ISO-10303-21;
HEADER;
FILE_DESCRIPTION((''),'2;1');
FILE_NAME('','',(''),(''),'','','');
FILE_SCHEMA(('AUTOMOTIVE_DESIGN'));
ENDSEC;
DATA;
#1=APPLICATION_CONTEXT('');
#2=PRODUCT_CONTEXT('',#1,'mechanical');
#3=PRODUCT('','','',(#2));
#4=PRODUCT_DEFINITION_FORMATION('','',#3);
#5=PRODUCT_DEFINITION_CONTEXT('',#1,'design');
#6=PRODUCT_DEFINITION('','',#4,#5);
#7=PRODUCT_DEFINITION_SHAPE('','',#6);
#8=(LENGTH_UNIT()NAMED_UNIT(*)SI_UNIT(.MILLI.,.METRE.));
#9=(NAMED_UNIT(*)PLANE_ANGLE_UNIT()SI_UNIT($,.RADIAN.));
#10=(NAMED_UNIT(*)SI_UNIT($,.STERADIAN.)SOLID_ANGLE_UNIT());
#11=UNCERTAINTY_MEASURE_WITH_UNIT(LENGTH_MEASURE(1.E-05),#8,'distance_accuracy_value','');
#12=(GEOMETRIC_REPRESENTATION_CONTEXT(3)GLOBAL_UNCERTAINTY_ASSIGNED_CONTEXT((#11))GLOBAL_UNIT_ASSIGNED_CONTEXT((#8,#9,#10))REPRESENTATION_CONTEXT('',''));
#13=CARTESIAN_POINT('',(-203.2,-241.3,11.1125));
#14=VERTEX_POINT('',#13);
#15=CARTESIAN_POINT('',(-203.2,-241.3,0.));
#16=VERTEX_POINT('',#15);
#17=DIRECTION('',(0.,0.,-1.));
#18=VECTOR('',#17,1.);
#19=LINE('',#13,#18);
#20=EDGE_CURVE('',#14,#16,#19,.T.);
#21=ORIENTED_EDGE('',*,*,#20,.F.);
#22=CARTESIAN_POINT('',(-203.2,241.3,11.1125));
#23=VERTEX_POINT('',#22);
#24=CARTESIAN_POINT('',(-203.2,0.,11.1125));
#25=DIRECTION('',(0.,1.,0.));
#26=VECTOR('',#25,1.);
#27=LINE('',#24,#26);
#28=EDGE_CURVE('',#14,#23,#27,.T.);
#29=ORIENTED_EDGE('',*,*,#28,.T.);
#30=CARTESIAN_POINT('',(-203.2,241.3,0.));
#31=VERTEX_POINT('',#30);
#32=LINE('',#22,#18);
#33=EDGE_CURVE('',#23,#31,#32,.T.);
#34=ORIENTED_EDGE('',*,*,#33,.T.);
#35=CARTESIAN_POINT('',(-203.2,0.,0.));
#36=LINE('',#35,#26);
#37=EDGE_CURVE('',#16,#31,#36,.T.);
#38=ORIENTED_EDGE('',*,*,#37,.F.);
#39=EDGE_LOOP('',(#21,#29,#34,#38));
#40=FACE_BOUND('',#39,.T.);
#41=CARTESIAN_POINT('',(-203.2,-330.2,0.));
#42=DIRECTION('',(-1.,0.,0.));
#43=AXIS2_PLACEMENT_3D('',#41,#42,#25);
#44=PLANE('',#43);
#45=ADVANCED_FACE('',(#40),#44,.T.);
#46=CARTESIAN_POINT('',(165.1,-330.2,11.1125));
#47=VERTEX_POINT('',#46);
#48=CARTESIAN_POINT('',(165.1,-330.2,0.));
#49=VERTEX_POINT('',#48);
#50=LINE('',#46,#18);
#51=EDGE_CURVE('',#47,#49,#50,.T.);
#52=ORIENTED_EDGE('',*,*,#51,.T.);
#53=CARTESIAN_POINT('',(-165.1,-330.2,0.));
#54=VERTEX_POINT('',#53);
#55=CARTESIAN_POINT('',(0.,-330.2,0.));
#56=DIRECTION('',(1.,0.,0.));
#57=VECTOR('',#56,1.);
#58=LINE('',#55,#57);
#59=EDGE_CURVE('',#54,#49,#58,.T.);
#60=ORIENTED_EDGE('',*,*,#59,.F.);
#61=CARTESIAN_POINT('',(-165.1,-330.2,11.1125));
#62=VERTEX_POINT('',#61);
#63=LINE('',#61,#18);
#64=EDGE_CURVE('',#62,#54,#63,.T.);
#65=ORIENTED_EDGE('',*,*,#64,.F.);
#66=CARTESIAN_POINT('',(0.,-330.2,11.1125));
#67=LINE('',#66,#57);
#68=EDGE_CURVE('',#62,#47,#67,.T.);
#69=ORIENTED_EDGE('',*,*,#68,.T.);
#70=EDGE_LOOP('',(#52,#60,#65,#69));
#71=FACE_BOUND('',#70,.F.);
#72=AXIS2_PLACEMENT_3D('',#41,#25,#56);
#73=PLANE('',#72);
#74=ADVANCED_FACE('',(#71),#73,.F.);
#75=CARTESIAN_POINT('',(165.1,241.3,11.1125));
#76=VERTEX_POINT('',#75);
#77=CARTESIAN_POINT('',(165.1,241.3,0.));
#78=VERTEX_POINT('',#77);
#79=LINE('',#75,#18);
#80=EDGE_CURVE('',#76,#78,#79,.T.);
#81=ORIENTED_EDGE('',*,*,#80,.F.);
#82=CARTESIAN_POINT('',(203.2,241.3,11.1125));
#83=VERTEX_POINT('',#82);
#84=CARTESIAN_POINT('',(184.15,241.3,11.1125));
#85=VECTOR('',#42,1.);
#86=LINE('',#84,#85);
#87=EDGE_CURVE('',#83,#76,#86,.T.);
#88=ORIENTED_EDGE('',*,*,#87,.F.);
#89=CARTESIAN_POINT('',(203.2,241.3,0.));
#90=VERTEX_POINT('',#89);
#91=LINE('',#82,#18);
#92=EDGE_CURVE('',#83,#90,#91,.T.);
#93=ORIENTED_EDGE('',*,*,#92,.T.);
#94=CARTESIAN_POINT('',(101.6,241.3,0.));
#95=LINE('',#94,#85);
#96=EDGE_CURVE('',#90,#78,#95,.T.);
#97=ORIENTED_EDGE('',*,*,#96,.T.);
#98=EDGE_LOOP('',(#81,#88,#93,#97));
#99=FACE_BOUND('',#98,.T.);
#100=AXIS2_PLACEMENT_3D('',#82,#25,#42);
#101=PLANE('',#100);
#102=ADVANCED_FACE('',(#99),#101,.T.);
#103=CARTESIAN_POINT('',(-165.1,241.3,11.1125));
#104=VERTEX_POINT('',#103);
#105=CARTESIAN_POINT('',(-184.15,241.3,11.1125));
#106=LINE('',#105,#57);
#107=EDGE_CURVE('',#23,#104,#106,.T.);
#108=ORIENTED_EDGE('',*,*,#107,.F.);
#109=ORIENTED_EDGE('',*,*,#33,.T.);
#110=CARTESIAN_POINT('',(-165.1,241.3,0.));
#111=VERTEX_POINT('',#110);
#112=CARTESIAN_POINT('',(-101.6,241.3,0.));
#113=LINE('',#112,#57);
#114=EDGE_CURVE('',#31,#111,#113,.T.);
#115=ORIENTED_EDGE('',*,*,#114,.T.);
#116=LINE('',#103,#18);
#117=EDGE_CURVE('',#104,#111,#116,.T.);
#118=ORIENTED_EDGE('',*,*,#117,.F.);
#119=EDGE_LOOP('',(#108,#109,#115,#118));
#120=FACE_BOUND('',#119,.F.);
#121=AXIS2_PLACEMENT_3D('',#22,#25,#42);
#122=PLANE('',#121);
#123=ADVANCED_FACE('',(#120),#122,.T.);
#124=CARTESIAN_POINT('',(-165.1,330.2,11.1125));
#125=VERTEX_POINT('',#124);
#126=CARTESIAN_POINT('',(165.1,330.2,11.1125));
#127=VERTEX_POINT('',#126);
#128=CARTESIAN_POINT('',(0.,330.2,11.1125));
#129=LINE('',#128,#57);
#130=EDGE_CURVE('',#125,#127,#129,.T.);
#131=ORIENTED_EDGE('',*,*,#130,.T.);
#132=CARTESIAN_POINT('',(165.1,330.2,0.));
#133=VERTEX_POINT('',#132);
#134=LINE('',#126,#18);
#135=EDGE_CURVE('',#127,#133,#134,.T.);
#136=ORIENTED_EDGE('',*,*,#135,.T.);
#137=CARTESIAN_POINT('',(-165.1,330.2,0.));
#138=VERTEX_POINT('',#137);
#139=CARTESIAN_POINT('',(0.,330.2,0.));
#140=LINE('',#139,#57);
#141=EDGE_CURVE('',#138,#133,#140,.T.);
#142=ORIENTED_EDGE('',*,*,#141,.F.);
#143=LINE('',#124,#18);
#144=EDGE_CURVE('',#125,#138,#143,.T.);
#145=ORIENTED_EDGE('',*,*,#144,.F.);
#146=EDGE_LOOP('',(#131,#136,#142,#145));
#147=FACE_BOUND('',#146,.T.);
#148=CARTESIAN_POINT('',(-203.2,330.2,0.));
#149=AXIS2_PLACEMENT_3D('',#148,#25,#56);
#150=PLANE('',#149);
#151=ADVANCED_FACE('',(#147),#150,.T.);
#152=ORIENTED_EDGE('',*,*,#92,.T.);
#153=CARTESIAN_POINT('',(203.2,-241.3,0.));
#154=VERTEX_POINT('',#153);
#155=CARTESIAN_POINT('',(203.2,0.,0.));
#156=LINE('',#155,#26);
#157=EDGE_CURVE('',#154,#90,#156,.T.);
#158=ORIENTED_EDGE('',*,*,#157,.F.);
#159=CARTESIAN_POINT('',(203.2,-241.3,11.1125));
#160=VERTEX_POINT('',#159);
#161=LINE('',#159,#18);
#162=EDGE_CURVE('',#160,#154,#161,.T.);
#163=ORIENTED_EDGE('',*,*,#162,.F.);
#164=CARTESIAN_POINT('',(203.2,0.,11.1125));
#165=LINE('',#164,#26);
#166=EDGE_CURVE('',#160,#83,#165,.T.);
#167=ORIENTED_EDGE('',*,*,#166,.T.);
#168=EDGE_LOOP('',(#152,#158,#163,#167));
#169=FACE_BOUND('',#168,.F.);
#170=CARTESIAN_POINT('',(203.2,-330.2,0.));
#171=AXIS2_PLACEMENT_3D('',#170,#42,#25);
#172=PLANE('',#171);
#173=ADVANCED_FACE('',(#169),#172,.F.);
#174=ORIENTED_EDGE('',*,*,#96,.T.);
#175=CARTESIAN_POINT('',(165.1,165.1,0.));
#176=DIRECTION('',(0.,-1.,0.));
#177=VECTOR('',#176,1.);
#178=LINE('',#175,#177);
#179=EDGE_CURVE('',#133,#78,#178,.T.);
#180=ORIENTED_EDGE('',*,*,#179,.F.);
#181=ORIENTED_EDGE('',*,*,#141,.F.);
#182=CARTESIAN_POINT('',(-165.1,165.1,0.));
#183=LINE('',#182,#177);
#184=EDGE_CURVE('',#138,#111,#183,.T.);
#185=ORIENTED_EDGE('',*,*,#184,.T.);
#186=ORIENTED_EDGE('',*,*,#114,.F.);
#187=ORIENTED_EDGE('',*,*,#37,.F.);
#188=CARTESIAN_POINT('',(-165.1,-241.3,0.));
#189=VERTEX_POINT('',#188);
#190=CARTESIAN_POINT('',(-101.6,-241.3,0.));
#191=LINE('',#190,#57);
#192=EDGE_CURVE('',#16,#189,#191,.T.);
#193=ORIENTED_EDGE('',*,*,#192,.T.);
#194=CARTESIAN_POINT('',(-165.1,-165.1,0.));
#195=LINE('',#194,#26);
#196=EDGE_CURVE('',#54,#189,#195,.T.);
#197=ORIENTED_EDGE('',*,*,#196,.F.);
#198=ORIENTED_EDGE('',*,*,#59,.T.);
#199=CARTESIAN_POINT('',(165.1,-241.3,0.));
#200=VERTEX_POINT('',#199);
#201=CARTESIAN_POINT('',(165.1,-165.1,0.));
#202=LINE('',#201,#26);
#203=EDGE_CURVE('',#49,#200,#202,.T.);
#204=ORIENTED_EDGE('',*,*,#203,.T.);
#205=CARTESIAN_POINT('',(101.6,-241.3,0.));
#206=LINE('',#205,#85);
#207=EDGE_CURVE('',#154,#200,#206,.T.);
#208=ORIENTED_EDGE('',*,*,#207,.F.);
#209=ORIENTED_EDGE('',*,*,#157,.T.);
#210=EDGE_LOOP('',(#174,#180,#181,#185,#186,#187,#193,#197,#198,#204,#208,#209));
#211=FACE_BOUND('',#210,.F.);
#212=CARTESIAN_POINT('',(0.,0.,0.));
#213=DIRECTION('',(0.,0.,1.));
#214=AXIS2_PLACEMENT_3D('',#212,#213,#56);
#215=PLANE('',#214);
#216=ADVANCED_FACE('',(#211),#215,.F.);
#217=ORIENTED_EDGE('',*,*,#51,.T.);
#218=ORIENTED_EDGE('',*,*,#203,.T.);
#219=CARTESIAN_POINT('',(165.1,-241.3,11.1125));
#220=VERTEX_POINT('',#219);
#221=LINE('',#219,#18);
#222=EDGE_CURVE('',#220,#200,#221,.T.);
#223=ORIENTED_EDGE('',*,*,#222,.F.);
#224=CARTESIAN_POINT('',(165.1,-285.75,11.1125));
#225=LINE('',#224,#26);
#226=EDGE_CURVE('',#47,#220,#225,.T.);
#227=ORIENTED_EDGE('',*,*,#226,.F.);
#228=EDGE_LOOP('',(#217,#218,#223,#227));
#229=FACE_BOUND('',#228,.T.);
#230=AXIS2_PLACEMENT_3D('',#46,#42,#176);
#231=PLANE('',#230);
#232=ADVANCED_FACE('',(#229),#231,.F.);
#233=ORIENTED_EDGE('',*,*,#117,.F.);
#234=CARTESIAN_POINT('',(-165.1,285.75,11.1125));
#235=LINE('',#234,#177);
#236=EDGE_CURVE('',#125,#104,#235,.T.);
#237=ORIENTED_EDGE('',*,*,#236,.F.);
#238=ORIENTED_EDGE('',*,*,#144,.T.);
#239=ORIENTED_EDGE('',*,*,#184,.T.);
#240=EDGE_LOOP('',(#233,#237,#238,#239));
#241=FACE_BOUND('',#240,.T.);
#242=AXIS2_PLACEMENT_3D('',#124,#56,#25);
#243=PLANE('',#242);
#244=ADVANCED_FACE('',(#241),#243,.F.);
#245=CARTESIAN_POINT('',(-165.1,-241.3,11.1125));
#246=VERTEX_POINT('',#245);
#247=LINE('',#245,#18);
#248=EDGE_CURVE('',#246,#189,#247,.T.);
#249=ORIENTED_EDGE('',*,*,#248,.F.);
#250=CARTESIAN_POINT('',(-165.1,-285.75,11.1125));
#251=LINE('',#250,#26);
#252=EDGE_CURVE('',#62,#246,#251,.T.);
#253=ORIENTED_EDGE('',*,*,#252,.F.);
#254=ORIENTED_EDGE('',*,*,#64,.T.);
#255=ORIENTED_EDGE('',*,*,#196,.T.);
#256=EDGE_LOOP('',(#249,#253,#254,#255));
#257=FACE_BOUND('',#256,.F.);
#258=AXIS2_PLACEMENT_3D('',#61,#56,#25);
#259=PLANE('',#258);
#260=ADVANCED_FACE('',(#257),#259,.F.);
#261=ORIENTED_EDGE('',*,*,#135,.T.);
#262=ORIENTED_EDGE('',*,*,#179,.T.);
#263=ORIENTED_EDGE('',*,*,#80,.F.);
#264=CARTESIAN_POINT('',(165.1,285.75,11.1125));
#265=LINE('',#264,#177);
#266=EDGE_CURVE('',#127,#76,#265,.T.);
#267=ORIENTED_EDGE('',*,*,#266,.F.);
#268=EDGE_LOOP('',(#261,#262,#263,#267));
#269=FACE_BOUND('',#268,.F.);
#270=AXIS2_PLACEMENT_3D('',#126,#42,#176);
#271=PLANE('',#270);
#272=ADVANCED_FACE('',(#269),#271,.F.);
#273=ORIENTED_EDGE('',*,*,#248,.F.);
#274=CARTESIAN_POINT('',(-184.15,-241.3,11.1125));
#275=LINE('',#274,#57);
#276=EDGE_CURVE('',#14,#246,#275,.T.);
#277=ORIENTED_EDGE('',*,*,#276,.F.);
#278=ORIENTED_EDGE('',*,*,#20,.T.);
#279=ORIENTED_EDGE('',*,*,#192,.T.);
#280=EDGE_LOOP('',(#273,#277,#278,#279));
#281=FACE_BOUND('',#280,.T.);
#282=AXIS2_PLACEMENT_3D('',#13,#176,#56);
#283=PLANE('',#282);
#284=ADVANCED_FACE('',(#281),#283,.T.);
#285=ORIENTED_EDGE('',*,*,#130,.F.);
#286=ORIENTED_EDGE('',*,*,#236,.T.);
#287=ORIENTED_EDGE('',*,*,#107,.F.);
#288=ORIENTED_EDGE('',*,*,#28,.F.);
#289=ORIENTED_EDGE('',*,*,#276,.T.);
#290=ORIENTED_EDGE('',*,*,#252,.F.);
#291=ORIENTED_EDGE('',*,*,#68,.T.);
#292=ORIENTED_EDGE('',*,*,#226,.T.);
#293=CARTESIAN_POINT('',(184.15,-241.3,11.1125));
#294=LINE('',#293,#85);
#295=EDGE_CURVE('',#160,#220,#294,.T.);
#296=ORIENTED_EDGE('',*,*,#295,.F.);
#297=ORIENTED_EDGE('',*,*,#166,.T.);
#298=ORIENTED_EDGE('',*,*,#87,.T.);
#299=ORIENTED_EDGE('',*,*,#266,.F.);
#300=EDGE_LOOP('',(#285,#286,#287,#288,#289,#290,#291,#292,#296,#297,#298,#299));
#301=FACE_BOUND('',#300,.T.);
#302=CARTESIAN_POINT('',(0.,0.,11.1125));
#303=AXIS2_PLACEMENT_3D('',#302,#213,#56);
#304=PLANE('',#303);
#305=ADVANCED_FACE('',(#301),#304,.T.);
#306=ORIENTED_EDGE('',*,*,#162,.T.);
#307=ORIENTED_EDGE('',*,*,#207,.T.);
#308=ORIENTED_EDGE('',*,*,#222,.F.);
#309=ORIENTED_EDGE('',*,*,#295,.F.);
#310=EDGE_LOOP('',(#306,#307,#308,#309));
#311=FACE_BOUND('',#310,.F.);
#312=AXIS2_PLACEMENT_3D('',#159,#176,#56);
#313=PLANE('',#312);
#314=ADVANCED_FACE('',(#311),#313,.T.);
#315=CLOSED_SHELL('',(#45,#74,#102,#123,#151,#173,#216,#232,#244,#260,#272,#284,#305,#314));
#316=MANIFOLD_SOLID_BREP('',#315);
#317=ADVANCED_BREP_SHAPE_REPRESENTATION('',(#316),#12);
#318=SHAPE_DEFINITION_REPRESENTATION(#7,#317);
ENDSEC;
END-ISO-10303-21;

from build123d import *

# Parameters (mm, degrees)
F0_W             = 406.4
F0_H             = 660.4
F1_DEPTH         = 11.1125
F2_W             = 38.1
F2_H             = 88.9
F3_DEPTH         = 25.4
F3_COPIES2_COUNT = 2


# Not quite as in the source:
# - a pattern or mirror of a feature is missing from the dataset's text; its kind, count and spacing are read off the source's solid


with BuildPart() as f1:
    # F0 (on Top) → F1 (new body)
    with BuildSketch(Plane.XY):
        Rectangle(F0_W, F0_H)
    extrude(amount=F1_DEPTH)

    # F2 (on face) → F3 (cut)
    with BuildSketch(Plane.XY.offset(11.1125)):
        with Locations((-184.15, -285.75)):
            Rectangle(F2_W, F2_H)
    f3 = extrude(amount=-F3_DEPTH, mode=Mode.SUBTRACT)

    # F3_copies: F3 across plane
    add(f3.mirror(Plane(origin=(0, 0, 0), x_dir=(0, 0, 1), z_dir=(1, 0, 0))), mode=Mode.SUBTRACT)

    # F3_copies1: F3 across plane
    add(f3.mirror(Plane.ZX), mode=Mode.SUBTRACT)

    # F3_copies2: F3 ×2 about axis
    f3_copies2_axis = Axis((0, 0, 0), (0, 0, 1))
    for i in range(1, F3_COPIES2_COUNT):
        add(f3.rotate(f3_copies2_axis, i * 360 / F3_COPIES2_COUNT), mode=Mode.SUBTRACT)


solid = f1.part
